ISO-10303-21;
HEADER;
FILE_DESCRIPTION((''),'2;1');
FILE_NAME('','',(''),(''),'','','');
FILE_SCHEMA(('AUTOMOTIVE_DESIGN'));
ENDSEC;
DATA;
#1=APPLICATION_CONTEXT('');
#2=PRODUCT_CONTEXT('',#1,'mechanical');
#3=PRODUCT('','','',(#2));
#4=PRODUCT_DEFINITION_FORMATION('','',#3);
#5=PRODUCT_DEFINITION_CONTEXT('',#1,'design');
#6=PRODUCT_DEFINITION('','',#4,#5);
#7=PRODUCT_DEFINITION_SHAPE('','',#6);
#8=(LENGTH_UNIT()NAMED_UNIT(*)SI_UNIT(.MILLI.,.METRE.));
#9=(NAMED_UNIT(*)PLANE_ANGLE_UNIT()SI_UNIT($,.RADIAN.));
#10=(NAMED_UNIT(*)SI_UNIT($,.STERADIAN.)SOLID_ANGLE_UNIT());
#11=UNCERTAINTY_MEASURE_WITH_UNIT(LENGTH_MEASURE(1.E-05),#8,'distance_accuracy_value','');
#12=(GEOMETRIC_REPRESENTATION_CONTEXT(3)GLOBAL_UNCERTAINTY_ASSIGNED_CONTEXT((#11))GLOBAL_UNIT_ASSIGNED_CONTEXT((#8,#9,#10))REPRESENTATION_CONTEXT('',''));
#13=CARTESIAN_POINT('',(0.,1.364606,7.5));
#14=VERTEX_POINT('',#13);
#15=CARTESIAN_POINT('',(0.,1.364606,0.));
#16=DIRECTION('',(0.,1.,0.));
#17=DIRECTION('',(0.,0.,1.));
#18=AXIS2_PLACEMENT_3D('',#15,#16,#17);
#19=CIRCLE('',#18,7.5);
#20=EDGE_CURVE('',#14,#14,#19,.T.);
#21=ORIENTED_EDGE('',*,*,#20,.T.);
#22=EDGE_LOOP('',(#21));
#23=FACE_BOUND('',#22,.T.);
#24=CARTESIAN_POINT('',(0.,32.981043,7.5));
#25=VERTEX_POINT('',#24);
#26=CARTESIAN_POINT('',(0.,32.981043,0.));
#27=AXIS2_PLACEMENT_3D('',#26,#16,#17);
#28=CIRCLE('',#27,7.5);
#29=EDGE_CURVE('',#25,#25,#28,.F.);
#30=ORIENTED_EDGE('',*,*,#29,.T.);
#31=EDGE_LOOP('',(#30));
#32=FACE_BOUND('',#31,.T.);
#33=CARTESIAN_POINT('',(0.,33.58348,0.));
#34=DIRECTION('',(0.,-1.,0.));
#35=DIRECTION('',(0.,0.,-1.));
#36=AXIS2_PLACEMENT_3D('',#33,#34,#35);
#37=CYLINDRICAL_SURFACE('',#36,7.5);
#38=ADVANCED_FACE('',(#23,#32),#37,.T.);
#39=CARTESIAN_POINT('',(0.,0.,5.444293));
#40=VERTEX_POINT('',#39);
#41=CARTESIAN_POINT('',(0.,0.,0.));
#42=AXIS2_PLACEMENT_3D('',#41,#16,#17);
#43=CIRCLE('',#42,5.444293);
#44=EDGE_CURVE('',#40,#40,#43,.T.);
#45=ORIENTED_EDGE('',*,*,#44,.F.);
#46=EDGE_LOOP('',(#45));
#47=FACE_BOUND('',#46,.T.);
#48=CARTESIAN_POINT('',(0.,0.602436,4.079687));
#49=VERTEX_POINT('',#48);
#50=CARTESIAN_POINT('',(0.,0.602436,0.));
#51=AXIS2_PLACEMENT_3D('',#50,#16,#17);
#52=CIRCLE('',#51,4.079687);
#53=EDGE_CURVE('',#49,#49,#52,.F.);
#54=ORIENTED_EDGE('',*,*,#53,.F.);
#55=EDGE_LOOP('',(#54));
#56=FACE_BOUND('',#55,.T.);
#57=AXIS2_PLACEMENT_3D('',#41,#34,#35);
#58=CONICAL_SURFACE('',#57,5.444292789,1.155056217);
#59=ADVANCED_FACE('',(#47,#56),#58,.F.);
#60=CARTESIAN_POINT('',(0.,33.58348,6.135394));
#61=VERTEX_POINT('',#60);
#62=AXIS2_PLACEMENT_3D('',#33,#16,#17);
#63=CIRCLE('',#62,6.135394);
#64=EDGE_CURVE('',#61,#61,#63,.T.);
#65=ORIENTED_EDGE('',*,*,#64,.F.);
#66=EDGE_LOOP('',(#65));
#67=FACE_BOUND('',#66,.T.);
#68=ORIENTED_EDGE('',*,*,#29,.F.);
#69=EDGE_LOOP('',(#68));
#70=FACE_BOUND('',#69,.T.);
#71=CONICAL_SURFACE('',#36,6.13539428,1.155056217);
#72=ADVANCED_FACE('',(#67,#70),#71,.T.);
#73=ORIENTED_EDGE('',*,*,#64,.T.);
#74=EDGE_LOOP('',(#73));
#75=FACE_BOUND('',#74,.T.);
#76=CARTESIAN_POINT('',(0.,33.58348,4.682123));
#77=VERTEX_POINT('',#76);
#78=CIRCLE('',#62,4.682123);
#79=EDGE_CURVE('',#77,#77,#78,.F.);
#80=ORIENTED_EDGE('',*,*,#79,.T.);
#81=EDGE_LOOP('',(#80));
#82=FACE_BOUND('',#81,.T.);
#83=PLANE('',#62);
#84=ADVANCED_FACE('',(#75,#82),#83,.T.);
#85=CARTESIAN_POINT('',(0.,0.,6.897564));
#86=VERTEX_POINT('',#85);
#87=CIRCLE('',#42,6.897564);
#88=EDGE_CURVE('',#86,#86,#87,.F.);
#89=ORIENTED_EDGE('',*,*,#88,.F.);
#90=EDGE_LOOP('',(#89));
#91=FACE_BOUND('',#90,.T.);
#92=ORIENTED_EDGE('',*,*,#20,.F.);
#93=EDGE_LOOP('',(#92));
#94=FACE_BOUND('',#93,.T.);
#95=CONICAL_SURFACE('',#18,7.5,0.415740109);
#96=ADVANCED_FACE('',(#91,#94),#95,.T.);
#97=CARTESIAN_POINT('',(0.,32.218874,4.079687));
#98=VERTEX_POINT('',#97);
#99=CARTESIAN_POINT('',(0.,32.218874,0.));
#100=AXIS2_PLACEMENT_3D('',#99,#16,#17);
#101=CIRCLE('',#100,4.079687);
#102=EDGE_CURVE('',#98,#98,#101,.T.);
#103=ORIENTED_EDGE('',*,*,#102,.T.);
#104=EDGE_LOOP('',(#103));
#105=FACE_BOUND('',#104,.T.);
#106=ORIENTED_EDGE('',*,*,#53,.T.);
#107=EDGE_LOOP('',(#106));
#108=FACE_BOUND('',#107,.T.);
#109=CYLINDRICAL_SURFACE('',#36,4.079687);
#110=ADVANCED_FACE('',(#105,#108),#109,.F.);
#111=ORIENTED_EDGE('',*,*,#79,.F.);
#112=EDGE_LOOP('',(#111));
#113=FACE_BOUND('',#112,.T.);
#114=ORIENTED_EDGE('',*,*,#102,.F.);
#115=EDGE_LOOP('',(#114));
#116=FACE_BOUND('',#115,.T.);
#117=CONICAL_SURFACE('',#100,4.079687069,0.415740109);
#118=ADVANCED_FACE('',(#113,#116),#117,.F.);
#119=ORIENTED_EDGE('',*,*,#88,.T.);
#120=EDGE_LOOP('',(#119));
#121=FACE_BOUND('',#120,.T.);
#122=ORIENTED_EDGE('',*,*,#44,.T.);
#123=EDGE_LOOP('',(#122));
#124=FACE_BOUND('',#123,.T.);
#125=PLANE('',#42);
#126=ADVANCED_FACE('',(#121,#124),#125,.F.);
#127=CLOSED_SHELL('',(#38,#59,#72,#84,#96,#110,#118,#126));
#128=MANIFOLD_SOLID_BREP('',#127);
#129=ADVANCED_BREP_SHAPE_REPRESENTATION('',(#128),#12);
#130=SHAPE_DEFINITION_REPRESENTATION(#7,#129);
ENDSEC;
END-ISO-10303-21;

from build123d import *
from OCP.BRepFilletAPI import BRepFilletAPI_MakeChamfer

# Parameters (mm, degrees)
SKETCH1_R           = 7.5
BOSS_EXTRUDE1_DEPTH = 33.583479707
SKETCH2_R           = 4.079687069
CUT_EXTRUDE1_DEPTH  = 36.21860459
CHAMFER1_SIZE       = 0.602436293
CHAMFER1_SIZE2      = 1.36460572


with BuildPart() as part:
    # Sketch1 → Boss-Extrude1 (new body)
    with BuildSketch(Plane(origin=(0, 0, 0), x_dir=(1, 0, 0), z_dir=(0, 1, 0))):
        Circle(SKETCH1_R)
    extrude(amount=BOSS_EXTRUDE1_DEPTH)

    # Sketch2 → Cut-Extrude1 (cut, through all)
    with BuildSketch(Plane(origin=(0, 0, 0), x_dir=(1, 0, 0), z_dir=(0, 1, 0))):
        Circle(SKETCH2_R)
    extrude(amount=CUT_EXTRUDE1_DEPTH, mode=Mode.SUBTRACT)

    # Chamfer1: one chamfer whose edges measure the first distance from different faces: ONE call of the kernel's chamfer builder (chamfer() names one face for all edges)
    chamfer1_edges_1 = [part.edges().sort_by_distance(p)[0] for p in [
        (-4.079687069, 33.583479707, 0),
    ]]
    chamfer1_side_1 = [part.faces().sort_by_distance(p)[0] for p in [
        (-7.287867966, 33.583479707, 0),
    ]]
    chamfer1_edges_2 = [part.edges().sort_by_distance(p)[0] for p in [
        (-4.079687069, 0, 0),
    ]]
    chamfer1_side_2 = [part.faces().sort_by_distance(p)[0] for p in [
        (-4.079687069, 16.791739854, 0),
    ]]
    chamfer1_edges_3 = [part.edges().sort_by_distance(p)[0] for p in [
        (-7.5, 0, 0),
    ]]
    chamfer1_side_3 = [part.faces().sort_by_distance(p)[0] for p in [
        (-7.287867966, 0, 0),
    ]]
    chamfer1_edges_4 = [part.edges().sort_by_distance(p)[0] for p in [
        (-7.5, 33.583479707, 0),
    ]]
    chamfer1_side_4 = [part.faces().sort_by_distance(p)[0] for p in [
        (-7.5, 16.791739854, 0),
    ]]
    chamfer1 = BRepFilletAPI_MakeChamfer(part.part.solid().wrapped)
    for e in chamfer1_edges_1:
        chamfer1.Add(CHAMFER1_SIZE, CHAMFER1_SIZE2, e.wrapped, chamfer1_side_1[0].wrapped)  # the first distance lies on this face
    for e in chamfer1_edges_2:
        chamfer1.Add(CHAMFER1_SIZE, CHAMFER1_SIZE2, e.wrapped, chamfer1_side_2[0].wrapped)  # the first distance lies on this face
    for e in chamfer1_edges_3:
        chamfer1.Add(CHAMFER1_SIZE, CHAMFER1_SIZE2, e.wrapped, chamfer1_side_3[0].wrapped)  # the first distance lies on this face
    for e in chamfer1_edges_4:
        chamfer1.Add(CHAMFER1_SIZE, CHAMFER1_SIZE2, e.wrapped, chamfer1_side_4[0].wrapped)  # the first distance lies on this face
    add(Compound.cast(chamfer1.Shape()), mode=Mode.REPLACE)


solid = part.part
